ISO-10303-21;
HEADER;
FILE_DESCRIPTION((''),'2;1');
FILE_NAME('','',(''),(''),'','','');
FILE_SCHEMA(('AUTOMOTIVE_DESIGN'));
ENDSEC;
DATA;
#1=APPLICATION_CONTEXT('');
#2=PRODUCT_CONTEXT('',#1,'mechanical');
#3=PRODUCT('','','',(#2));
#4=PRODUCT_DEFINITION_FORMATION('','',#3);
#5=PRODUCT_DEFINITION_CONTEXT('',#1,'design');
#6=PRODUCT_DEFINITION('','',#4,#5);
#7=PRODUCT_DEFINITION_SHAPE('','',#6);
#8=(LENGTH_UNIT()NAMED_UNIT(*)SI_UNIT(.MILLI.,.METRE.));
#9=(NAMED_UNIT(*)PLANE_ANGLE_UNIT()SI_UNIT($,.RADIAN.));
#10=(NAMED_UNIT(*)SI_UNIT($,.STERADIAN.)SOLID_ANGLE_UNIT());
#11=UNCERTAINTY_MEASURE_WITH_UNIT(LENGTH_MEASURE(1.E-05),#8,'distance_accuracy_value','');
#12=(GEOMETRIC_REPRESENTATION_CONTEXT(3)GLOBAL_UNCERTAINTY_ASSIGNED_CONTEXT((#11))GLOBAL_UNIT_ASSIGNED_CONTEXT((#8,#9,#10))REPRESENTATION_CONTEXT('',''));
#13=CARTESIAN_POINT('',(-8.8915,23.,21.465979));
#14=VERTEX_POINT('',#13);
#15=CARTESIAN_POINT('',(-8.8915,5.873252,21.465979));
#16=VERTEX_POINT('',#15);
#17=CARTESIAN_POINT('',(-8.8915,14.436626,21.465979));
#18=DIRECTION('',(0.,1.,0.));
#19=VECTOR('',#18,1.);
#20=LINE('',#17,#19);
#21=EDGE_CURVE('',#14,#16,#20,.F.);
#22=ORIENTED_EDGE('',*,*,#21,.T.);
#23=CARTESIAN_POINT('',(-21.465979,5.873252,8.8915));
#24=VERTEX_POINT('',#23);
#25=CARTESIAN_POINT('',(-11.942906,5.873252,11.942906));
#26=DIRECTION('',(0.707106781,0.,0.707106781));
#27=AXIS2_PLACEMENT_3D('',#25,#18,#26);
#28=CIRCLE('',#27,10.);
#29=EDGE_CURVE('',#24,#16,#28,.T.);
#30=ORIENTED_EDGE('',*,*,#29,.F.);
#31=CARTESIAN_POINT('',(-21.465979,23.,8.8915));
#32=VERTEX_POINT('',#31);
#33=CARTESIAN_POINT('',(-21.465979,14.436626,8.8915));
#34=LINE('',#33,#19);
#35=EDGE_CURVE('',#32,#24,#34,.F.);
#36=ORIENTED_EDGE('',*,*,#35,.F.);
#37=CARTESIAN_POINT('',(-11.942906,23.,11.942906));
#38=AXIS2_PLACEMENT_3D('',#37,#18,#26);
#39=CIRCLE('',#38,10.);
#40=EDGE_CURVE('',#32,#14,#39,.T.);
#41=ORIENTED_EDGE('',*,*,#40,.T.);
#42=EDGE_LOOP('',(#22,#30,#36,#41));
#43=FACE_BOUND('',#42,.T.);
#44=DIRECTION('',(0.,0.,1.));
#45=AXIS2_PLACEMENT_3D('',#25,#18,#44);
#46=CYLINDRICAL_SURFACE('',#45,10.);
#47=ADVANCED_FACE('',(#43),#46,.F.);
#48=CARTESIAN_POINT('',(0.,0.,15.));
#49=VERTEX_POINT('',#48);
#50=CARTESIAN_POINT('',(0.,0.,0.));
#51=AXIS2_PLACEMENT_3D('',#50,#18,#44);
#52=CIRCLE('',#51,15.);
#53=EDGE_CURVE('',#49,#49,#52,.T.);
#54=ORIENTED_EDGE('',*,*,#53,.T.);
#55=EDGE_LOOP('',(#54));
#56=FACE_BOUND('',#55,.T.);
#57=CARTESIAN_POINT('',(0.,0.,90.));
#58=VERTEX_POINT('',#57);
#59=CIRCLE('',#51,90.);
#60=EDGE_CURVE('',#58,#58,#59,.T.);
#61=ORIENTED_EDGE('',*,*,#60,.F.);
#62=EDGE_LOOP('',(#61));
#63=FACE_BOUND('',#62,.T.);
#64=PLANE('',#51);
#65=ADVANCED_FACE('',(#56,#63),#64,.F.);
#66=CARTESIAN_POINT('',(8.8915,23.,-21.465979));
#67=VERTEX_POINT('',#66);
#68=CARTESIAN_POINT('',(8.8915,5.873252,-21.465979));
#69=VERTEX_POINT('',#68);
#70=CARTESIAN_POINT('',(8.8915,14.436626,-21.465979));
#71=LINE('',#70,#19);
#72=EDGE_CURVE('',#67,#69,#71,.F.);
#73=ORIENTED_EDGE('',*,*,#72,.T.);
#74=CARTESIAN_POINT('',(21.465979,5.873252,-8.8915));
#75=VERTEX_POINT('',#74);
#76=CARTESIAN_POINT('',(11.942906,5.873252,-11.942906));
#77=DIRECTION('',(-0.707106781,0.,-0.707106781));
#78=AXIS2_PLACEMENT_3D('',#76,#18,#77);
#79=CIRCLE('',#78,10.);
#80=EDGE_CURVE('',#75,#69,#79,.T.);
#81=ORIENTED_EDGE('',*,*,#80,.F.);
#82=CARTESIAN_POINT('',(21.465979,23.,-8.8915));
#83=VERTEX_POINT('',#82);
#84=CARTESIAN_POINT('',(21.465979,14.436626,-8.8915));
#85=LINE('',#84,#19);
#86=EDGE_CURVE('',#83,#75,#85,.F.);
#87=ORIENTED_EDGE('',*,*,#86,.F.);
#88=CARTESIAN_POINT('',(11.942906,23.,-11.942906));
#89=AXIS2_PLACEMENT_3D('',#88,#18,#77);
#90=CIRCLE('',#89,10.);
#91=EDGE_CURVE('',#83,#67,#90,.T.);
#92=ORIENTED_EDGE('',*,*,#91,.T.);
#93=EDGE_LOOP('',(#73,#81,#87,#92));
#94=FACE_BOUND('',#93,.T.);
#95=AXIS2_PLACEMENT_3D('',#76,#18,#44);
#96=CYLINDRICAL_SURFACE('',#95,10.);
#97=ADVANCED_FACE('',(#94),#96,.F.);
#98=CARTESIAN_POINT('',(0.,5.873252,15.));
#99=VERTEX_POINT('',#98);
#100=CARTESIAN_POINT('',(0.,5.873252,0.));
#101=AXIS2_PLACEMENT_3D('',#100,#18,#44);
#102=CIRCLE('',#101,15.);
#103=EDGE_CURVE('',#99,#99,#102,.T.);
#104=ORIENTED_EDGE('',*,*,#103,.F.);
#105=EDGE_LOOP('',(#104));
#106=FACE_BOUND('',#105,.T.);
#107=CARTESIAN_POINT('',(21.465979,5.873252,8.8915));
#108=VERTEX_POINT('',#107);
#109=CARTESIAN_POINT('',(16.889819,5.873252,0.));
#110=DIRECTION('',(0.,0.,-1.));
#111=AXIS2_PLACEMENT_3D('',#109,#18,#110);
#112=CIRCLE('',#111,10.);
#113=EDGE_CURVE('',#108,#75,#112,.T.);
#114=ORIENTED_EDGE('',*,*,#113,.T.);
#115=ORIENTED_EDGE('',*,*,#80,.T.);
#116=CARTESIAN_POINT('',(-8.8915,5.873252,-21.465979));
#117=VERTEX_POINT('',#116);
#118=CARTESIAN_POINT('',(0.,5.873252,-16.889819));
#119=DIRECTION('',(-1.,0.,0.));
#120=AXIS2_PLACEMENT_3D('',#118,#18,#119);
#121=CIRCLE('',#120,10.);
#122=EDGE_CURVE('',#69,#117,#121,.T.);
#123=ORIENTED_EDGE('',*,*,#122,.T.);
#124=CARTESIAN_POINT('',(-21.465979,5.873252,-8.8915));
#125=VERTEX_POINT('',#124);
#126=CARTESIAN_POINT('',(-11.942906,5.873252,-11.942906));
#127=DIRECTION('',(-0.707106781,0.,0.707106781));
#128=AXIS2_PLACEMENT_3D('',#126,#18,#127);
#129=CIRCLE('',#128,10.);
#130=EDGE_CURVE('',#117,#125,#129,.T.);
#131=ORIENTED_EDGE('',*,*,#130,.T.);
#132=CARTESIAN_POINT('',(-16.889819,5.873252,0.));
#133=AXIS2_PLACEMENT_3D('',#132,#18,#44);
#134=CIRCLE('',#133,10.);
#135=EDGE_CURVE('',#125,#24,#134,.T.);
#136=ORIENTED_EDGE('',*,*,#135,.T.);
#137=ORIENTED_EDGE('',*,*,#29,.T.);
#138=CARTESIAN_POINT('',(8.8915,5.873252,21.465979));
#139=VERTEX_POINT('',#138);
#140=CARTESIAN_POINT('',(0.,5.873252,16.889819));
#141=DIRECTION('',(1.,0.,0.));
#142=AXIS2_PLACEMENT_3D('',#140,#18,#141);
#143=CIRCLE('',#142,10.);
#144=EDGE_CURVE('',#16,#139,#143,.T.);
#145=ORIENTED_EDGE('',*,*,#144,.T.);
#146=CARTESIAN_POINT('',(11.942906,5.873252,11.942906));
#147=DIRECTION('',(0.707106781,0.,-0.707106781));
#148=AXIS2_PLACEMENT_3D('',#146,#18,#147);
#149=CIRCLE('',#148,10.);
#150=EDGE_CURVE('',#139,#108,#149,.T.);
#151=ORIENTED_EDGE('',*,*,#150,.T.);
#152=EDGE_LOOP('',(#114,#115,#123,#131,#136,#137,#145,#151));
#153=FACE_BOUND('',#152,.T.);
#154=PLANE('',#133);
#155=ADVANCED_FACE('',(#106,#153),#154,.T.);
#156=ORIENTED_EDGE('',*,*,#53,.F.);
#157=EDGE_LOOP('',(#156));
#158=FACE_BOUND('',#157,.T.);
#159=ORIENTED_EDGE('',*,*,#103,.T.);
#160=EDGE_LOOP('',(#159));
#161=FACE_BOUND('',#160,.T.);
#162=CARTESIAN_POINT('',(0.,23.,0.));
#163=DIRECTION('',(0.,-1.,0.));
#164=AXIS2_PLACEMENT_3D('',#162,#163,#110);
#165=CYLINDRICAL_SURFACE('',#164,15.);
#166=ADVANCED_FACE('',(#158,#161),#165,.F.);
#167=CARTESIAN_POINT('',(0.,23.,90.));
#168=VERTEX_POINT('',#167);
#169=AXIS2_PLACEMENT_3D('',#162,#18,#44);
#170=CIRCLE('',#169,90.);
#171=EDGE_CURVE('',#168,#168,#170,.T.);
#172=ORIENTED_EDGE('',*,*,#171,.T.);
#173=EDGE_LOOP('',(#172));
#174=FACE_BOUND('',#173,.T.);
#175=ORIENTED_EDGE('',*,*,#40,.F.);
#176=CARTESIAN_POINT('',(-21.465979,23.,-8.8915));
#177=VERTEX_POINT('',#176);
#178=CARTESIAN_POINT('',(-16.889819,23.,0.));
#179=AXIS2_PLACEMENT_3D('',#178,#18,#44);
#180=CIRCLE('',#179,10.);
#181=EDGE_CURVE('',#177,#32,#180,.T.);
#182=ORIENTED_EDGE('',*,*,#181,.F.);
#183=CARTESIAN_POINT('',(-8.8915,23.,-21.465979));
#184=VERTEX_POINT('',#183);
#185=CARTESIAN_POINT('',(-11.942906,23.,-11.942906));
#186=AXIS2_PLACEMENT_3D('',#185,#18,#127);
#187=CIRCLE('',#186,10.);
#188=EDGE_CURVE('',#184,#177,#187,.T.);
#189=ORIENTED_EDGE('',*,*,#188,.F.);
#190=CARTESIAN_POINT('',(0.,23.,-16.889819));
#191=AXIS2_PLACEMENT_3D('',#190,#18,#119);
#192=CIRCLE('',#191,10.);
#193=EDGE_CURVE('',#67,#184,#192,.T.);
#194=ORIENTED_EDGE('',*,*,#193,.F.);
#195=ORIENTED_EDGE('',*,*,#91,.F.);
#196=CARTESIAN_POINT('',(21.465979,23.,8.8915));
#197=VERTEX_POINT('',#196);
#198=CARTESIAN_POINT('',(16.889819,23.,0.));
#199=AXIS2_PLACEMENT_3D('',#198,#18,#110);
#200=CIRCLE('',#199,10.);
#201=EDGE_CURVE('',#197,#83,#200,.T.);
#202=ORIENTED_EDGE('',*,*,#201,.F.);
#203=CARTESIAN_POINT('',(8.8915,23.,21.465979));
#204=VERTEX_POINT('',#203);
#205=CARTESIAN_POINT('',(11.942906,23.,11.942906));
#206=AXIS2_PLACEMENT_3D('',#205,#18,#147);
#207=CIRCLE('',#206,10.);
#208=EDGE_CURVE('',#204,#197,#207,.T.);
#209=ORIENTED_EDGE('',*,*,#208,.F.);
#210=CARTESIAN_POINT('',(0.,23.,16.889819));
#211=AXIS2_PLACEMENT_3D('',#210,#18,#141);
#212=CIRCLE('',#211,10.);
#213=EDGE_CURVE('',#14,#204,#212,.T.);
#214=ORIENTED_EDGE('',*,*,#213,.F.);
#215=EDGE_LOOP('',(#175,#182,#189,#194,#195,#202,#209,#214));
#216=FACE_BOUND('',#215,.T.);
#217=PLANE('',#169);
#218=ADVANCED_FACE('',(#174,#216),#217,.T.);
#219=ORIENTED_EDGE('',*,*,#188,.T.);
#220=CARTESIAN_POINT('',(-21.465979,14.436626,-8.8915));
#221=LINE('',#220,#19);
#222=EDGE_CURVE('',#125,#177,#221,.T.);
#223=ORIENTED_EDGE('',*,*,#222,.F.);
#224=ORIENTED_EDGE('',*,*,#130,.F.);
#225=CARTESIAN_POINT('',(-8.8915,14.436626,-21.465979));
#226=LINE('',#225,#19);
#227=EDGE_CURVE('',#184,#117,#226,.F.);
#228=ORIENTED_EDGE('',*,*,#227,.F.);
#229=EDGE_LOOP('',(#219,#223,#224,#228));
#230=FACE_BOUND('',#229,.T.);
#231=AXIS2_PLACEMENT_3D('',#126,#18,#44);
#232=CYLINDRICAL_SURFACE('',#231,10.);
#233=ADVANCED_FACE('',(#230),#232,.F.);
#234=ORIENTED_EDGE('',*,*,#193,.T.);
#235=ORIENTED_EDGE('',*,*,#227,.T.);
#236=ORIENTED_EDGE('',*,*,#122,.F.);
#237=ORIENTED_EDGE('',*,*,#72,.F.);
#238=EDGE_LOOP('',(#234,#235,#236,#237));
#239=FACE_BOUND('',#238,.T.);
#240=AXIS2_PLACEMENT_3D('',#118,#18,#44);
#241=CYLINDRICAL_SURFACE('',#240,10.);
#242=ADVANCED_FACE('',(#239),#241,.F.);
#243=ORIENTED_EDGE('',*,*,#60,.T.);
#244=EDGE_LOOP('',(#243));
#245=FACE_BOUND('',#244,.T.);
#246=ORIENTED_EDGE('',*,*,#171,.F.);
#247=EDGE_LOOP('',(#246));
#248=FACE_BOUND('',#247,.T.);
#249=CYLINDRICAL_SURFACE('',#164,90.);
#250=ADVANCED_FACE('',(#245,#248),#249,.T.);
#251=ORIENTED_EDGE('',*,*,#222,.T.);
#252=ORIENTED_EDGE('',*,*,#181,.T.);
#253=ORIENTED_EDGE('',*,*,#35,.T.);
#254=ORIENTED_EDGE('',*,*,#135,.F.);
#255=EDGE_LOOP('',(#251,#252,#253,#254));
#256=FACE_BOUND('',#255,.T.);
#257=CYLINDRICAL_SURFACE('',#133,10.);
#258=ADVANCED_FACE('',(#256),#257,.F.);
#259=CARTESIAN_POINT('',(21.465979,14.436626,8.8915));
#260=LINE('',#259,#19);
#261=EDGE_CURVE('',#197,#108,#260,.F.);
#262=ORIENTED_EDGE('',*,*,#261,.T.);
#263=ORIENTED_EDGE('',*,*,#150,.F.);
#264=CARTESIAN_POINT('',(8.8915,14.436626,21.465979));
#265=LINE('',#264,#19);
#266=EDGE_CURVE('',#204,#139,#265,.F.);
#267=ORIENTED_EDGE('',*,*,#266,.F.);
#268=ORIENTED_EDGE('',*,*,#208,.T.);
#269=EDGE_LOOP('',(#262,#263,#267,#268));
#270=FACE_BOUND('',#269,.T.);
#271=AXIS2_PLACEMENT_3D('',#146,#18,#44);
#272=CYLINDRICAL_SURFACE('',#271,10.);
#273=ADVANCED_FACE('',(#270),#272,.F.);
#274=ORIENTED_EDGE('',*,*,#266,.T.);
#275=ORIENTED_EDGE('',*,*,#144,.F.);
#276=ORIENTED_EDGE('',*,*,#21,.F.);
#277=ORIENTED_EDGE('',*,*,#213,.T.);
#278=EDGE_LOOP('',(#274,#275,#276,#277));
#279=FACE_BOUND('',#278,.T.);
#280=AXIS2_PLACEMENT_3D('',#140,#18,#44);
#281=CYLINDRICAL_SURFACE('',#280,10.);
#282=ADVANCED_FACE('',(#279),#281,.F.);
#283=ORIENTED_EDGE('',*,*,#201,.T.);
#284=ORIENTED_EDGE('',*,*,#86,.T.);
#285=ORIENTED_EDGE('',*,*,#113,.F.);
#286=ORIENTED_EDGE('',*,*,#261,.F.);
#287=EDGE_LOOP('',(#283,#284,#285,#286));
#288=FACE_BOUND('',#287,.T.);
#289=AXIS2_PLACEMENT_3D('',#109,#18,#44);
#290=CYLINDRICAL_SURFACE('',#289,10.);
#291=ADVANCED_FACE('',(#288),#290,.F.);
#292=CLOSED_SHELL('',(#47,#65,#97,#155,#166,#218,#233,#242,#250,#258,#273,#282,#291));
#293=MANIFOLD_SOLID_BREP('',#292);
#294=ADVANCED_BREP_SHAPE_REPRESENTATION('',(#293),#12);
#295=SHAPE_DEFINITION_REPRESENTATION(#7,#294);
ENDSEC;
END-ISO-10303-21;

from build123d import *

# Parameters (mm, degrees)
SKETCH1_R           = 90
BOSS_EXTRUDE1_DEPTH = 23
SKETCH2_R           = 15
CUT_EXTRUDE1_DEPTH  = 130.340635533
SKETCH3_R           = 10
CUT_EXTRUDE2_DEPTH  = 17.126747947
CIRPATTERN1_COUNT   = 8


with BuildPart() as part:
    # Sketch1 → Boss-Extrude1 (new body)
    with BuildSketch(Plane(origin=(0, 0, 0), x_dir=(1, 0, 0), z_dir=(0, 1, 0))):
        Circle(SKETCH1_R)
    extrude(amount=BOSS_EXTRUDE1_DEPTH)

    # Sketch2 → Cut-Extrude1 (cut, through all)
    with BuildSketch(Plane(origin=(0, 0, 0), x_dir=(1, 0, 0), z_dir=(0, 1, 0))):
        Circle(SKETCH2_R)
    extrude(amount=CUT_EXTRUDE1_DEPTH, mode=Mode.SUBTRACT)

    # Sketch3 → Cut-Extrude2 (cut)
    with BuildSketch(Plane(origin=(0, 23, 0), x_dir=(1, 0, 0), z_dir=(0, 1, 0))):
        with Locations((-16.889819283, 0)):
            Circle(SKETCH3_R)
    cut_extrude2 = extrude(amount=-CUT_EXTRUDE2_DEPTH, mode=Mode.SUBTRACT)

    # CirPattern1: Cut-Extrude2 ×8 about axis
    cirpattern1_axis = Axis((0, 0, 0), (0, 1, 0))
    for i in range(1, CIRPATTERN1_COUNT):
        add(cut_extrude2.rotate(cirpattern1_axis, i * 360 / CIRPATTERN1_COUNT), mode=Mode.SUBTRACT)


solid = part.part
